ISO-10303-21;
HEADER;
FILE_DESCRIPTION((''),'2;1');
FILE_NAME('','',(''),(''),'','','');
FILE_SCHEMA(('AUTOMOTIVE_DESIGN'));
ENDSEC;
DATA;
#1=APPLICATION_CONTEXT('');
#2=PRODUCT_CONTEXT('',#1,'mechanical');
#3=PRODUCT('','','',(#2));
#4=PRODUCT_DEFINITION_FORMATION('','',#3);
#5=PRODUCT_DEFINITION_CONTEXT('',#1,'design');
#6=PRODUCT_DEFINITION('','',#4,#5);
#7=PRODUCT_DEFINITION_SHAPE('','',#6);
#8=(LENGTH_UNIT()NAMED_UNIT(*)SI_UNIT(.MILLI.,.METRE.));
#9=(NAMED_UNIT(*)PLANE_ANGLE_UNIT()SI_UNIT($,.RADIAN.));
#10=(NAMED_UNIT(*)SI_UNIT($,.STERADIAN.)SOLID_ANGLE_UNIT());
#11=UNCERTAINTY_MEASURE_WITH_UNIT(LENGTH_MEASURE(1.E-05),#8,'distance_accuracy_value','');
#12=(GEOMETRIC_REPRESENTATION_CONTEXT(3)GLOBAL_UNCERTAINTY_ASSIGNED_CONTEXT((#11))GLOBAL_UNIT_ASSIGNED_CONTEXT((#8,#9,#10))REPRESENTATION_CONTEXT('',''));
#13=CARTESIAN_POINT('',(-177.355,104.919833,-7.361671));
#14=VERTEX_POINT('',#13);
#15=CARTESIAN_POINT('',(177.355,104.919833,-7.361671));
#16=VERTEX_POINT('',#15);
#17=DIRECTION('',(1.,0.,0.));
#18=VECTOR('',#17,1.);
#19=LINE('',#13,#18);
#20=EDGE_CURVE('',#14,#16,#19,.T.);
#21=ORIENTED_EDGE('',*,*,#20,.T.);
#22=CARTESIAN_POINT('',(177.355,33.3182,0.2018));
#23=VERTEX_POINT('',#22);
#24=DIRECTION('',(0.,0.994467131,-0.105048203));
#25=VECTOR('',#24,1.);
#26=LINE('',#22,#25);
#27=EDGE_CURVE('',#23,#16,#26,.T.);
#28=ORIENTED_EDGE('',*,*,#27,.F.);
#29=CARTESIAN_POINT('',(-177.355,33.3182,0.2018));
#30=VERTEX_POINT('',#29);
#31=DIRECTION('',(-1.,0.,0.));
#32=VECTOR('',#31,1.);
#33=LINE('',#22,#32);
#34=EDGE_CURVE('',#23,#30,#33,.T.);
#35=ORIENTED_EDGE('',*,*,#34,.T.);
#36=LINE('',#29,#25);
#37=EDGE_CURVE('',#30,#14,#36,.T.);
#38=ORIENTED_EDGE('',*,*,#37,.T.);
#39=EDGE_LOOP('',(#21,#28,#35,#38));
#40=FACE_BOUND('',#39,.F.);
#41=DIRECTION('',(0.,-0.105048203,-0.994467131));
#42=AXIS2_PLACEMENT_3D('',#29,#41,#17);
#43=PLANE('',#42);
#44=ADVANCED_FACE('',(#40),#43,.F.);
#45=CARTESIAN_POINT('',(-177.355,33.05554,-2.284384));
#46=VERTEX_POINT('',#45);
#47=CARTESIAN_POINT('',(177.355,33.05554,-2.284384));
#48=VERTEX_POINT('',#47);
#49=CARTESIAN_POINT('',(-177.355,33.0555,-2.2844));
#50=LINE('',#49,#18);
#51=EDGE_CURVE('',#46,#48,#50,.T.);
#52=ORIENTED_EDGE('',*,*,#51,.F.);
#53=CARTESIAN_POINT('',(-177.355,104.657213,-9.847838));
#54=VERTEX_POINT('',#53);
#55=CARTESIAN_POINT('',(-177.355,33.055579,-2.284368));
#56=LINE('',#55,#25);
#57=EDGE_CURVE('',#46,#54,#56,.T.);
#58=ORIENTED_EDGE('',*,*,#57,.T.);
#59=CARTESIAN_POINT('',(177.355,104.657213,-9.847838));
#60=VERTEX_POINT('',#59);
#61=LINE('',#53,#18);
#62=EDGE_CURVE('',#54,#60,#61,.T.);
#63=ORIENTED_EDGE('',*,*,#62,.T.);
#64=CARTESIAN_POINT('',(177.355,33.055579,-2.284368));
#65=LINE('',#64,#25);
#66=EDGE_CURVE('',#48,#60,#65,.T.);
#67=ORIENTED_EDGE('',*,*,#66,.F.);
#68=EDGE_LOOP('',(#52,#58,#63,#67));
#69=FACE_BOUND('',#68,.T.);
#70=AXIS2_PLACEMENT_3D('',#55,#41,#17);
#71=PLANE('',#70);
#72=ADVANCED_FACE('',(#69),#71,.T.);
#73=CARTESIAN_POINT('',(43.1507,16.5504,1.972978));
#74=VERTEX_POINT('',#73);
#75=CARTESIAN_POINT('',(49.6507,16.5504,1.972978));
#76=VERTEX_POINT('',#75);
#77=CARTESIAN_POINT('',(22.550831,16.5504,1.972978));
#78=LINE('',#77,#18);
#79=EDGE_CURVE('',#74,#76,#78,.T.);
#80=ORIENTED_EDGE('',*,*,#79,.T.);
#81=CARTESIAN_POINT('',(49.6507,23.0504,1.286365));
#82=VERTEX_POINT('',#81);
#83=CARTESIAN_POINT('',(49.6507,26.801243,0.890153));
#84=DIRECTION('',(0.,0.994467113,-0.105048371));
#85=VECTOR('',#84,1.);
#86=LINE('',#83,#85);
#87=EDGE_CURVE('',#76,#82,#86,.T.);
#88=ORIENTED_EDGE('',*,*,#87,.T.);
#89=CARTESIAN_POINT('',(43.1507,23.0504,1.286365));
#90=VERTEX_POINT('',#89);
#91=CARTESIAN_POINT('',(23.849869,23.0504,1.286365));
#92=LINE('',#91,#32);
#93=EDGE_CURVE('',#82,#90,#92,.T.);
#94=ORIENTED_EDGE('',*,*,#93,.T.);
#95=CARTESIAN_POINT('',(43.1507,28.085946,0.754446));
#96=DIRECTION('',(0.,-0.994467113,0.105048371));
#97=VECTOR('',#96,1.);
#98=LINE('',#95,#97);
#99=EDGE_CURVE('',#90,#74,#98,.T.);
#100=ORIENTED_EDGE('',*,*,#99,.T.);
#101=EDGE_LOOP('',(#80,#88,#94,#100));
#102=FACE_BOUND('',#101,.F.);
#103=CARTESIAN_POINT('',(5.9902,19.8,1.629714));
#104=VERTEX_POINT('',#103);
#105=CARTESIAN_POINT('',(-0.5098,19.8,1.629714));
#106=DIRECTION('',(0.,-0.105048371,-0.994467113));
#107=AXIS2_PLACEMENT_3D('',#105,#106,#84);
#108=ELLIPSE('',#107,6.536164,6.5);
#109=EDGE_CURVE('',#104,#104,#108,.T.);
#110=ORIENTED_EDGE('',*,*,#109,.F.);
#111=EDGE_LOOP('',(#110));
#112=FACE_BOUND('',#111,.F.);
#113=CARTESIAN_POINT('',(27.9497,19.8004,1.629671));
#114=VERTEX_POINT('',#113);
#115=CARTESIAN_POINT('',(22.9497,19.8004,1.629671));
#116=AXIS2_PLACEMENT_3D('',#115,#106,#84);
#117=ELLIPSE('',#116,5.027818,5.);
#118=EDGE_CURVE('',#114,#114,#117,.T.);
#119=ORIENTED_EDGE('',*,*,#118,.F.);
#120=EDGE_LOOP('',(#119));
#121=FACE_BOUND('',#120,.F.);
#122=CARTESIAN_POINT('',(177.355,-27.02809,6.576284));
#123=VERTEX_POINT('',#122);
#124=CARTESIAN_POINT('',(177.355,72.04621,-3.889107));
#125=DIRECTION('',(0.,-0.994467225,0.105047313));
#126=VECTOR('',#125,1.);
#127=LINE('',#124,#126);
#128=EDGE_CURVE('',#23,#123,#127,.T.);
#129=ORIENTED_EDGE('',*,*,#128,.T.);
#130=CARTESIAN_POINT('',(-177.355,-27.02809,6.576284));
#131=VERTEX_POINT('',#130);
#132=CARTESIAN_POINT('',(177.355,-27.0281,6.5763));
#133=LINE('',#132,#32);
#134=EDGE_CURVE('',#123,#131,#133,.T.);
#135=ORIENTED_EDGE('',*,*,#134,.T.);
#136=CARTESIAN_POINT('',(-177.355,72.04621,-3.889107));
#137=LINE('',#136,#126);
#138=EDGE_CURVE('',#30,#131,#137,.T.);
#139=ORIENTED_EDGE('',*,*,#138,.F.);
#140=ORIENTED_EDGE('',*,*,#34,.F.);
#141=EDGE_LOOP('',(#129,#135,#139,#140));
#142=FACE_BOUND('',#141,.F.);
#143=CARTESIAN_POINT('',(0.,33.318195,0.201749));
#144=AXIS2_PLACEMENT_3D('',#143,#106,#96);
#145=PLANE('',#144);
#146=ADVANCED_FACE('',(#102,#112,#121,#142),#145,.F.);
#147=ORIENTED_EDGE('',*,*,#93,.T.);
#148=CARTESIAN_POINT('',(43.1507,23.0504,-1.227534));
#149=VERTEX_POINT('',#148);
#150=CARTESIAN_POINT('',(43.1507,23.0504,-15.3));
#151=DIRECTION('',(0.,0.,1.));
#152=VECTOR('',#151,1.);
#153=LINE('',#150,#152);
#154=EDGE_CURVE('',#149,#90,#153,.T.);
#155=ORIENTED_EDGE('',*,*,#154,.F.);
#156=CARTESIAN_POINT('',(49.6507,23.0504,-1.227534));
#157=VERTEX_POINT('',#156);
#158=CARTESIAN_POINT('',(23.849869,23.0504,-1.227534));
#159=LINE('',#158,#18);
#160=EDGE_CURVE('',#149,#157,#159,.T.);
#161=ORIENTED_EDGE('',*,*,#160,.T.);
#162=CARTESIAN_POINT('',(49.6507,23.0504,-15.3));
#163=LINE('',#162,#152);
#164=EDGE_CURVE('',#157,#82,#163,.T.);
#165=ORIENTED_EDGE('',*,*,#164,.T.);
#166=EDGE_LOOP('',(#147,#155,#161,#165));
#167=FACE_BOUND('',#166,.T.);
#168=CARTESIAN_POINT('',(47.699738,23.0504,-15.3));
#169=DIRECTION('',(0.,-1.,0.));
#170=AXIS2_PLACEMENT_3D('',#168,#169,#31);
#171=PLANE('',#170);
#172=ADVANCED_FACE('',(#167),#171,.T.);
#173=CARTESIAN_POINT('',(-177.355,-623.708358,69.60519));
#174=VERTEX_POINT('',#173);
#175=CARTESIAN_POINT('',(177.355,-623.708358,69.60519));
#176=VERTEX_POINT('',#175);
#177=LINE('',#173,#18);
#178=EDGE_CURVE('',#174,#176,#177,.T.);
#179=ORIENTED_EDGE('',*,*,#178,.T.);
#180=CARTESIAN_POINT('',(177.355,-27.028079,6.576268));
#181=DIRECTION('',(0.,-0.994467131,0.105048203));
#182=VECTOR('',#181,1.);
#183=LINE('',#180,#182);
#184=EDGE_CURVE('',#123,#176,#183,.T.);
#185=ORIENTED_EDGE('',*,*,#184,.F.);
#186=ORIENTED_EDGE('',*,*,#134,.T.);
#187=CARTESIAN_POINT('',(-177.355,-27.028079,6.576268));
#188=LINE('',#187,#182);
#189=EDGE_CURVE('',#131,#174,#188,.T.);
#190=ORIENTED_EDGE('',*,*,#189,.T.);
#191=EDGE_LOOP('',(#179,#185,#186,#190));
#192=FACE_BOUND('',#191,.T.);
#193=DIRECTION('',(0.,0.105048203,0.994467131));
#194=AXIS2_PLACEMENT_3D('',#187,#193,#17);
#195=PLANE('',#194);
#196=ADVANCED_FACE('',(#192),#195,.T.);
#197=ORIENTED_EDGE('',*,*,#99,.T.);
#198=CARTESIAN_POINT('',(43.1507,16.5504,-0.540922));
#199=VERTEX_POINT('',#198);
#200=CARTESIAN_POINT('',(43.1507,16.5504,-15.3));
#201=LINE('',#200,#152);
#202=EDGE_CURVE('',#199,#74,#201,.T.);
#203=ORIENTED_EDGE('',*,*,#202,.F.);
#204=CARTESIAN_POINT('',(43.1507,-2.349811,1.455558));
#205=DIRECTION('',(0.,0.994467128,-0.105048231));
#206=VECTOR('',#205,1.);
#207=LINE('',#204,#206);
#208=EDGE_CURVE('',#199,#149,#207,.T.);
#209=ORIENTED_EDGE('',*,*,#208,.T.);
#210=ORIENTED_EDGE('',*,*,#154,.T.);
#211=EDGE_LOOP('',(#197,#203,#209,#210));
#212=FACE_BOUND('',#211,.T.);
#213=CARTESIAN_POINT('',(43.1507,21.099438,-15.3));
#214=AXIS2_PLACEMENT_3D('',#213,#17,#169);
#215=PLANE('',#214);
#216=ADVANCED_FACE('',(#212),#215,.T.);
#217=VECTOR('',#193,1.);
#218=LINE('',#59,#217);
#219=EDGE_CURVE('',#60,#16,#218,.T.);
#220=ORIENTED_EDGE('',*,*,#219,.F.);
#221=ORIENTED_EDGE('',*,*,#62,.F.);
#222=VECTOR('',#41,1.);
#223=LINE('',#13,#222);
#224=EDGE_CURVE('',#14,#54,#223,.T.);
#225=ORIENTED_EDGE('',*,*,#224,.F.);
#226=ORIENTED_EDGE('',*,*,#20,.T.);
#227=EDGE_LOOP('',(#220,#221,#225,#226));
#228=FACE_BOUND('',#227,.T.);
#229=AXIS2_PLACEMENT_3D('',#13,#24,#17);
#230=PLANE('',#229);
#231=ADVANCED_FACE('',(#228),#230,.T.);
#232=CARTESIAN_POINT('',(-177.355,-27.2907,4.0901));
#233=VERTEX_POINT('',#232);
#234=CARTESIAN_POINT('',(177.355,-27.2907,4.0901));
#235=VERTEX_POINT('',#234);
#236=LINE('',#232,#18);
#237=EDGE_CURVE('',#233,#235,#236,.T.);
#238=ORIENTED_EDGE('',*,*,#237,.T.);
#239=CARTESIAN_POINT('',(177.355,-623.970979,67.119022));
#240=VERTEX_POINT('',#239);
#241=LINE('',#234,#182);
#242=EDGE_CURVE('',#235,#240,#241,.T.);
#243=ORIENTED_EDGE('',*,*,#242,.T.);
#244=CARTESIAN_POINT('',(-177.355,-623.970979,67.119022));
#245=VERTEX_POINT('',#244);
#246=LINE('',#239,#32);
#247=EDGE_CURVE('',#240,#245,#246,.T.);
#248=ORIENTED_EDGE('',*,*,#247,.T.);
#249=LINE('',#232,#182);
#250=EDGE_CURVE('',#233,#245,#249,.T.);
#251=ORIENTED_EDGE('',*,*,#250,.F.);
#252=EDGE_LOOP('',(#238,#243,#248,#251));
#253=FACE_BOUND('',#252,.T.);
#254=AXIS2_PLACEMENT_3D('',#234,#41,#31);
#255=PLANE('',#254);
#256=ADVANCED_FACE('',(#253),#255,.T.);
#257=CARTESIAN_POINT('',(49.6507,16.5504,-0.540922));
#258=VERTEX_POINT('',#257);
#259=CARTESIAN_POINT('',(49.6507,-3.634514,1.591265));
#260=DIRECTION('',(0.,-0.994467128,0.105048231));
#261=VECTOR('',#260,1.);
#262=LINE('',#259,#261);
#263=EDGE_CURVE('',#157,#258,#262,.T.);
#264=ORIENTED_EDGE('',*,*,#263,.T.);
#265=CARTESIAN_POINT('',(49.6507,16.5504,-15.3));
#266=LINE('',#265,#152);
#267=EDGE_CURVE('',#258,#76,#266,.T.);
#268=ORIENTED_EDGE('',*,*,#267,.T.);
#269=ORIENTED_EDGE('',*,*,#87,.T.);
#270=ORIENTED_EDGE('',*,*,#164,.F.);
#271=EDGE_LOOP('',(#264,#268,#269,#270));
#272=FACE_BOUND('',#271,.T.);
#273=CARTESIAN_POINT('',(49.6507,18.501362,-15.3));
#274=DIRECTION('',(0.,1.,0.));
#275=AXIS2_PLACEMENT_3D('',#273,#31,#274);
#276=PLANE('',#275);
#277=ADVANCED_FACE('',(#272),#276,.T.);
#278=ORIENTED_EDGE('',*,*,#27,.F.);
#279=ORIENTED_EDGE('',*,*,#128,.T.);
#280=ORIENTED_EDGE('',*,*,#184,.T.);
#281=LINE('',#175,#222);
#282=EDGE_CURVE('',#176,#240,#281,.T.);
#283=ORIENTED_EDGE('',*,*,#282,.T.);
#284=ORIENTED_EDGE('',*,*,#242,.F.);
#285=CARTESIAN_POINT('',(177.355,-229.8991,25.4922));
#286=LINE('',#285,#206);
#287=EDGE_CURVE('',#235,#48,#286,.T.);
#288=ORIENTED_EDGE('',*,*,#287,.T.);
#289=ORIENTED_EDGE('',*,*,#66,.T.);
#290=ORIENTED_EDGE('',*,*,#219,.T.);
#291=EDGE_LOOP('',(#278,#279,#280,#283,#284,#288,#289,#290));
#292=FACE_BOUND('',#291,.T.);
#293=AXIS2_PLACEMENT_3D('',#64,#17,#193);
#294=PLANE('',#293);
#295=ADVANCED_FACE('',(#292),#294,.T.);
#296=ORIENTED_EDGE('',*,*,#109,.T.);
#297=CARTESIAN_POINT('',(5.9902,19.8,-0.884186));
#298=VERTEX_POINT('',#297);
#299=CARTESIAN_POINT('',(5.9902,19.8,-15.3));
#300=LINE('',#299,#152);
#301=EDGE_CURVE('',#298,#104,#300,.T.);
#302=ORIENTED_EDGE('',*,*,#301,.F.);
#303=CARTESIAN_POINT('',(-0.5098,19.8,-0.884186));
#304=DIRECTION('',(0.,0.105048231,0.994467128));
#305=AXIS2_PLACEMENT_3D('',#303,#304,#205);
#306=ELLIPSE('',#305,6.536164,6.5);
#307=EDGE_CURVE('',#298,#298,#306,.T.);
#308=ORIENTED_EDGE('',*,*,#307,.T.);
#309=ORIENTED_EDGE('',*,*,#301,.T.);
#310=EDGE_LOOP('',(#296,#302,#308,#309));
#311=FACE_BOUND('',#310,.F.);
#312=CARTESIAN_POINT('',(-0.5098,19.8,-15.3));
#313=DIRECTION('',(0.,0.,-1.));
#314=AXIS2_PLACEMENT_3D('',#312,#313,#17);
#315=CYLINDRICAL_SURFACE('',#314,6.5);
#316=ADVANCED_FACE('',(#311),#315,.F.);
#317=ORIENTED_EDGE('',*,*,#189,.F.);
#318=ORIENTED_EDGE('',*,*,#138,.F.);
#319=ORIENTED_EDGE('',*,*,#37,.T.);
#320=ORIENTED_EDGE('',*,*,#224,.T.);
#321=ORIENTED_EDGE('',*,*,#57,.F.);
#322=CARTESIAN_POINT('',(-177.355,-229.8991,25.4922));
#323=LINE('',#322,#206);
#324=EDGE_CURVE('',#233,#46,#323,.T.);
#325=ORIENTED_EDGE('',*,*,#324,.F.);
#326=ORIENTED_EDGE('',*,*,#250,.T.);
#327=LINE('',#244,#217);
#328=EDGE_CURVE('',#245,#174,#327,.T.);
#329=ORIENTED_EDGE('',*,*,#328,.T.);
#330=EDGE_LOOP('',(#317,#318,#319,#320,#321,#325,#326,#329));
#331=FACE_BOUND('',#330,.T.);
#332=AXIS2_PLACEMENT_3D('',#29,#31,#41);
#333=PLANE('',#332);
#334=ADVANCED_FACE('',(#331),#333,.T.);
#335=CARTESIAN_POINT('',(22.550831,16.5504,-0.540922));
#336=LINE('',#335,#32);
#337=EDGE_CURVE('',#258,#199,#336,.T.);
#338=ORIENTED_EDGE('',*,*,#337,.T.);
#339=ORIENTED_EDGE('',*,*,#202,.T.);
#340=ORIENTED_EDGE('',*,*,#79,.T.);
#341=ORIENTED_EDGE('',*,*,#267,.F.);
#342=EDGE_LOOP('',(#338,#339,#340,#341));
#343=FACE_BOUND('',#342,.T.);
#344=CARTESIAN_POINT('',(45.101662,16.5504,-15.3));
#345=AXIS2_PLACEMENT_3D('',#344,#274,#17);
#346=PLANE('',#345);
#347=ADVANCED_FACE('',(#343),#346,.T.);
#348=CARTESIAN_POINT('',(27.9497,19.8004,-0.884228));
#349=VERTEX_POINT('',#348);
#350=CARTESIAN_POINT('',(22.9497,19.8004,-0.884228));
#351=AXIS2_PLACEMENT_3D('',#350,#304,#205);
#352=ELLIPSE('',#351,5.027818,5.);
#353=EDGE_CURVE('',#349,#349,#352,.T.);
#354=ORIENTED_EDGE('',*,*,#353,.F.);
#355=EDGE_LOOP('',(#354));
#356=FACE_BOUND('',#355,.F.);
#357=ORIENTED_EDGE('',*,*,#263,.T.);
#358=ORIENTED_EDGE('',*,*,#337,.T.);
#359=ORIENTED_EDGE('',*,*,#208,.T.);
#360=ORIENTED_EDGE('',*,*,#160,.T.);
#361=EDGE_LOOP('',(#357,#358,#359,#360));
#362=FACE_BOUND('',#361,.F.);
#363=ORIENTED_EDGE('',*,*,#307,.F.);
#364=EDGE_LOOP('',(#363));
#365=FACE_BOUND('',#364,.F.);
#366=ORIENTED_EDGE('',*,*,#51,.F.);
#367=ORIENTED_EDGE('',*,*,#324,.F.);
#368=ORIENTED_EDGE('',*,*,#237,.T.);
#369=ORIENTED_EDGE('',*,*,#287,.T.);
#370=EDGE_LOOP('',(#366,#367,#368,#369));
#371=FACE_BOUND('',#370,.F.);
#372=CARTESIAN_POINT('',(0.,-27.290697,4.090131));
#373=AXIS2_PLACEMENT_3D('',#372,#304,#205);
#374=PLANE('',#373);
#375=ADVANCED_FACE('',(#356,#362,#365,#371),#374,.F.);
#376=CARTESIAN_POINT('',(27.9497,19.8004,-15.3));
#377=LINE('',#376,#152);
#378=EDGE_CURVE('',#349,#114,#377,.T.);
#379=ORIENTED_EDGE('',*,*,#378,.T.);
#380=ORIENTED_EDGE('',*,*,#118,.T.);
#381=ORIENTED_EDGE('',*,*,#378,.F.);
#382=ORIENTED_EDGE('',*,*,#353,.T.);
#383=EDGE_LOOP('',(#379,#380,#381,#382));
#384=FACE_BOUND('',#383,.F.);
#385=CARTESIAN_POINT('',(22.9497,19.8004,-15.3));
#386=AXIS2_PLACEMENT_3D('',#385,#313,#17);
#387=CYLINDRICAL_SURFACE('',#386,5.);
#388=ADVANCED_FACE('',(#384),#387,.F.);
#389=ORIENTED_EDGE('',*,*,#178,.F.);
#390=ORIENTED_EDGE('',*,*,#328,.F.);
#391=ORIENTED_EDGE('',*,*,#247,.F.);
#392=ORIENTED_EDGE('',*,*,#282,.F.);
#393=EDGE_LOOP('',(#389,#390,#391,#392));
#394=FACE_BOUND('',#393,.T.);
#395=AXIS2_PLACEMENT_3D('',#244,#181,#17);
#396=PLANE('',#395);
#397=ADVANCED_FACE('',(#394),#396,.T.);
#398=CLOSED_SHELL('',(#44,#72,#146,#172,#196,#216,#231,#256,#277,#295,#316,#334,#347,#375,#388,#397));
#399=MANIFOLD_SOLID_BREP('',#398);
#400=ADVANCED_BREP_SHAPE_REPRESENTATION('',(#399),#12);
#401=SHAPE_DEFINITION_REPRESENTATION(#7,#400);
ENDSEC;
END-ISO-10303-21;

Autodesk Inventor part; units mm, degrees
ref_plane "YZ Plane" through (0, 0, 0) normal (1, 0, 0) x (0, 1, 0)
ref_plane "XZ Plane" through (0, 0, 0) normal (0, 1, 0) x (-1, 0, 0)
ref_plane "XY Plane" through (0, 0, 0) normal (0, 0, 1) x (1, 0, 0)
sketch "Sketch2" plane through (0, 0, 0) normal (1, 0, 0) x (0, 1, 0)
  line L0 (9.7757, 0) -> (-10.7, 0) projected
  line L1 (27.1787, -1.709) -> (12.4213, -1.709) projected
  line L2 (10.7, 0) -> (9.7757, 0) projected
  arc A0 (11, -0.3) -> (10.7, 0) centre (10.7, -0.3) ccw projected
  line L3 (11, -15) -> (11, -0.3) projected
  line L4 (-229.8991, 25.4922) -> (33.0555, -2.2844)
  line L5 (72.0462, -3.8892) -> (-254.3637, 30.5904)
  line L6 (33.0555, -2.2844) -> (33.3182, 0.2018)
  line L7 (-27.0281, 6.5763) -> (-27.2907, 4.0901)
  point P0 (0, 0)
  point P1 (33.3182, 0.2018)
  dimension "d5" = 2.5
extrude "Extrusion2" add sketch "Sketch2" along normal mid plane 354.71
ref_plane "Work Plane1" through (-31.6, 28.9, -15.3) normal (0, 0, 1) x (-0.0000001, -1, 0)
sketch "Sketch3" plane through (-100, -27.0281, -15.3) normal (0, 0, 1) x (1, 0, 0)
  circle A0 centre (99.4902, 46.8281) radius 4.4577 projected
  circle A1 centre (122.9497, 46.8285) radius 3.99 projected
  line L0 (144.7507, 45.1805) -> (148.0507, 45.1805) projected
  circle A2 centre (99.4902, 46.8281) radius 6.5
  circle A3 centre (122.9497, 46.8285) radius 5
  circle A4 centre (146.4007, 46.8285) radius 3.5
  line L1 (148.0507, 48.4805) -> (144.7507, 48.4805) projected
  line L2 (144.4007, 48.8305) -> (144.4007, 44.8305) projected
  line L3 (148.0507, 45.1805) -> (148.0507, 48.4805) projected
  line L4 (144.7507, 45.1805) -> (148.0507, 45.1805) projected
  line L5 (148.0507, 48.4805) -> (144.7507, 48.4805) projected
  line L6 (144.7507, 48.4805) -> (144.7507, 45.1805) projected
  line L7 (149.6507, 50.0785) -> (143.1507, 50.0785)
  line L8 (143.1507, 50.0785) -> (143.1507, 43.5785)
  line L9 (143.1507, 43.5785) -> (149.6507, 43.5785)
  line L10 (149.6507, 43.5785) -> (149.6507, 50.0785)
  line L11 (149.6507, 50.0785) -> (143.1507, 43.5785) construction
  line L12 (143.1507, 50.0785) -> (149.6507, 43.5785) construction
  point P0 (146.4007, 45.1805)
  dimension "d13" = 13
  dimension "d14" = 10
  dimension "d15" = 7
  dimension "d20" = 6.5
  dimension "d21" = 6.5
extrude "Extrusion3" cut sketch "Sketch3" along normal through all contours A0 | A1 | L6 L1 L3 L0 | A2 | A3 | L10 A4 L9 L8 L7 | A4 L7 L10 | L10 L9 A4 | A4 L8 L7 | L9 L8 A4
sketch "Sketch4" plane through (-177.355, -27.2907, 4.0901) normal (0, -0.9944671, 0.1050482) x (1, 0, 0)
  line L0 (354.71, 0) -> (0, 0) projected
  line L1 (354.71, 2.5) -> (354.71, 0) projected
  line L2 (0, 2.5) -> (354.71, 2.5) projected
  line L3 (0, 0) -> (0, 2.5) projected
  point P0 (177.355, -1.2007)
extrude "Extrusion4" add sketch "Sketch4" along normal blind 600
sketch "Sketch5" plane through (-177.355, 33.3182, 0.2018) normal (0, 0.9944671, -0.1050482) x (1, 0, 0)
  line L0 (0, 0) -> (354.71, 0) projected
  line L1 (354.71, 2.5) -> (354.71, 0) projected
  line L2 (0, 2.5) -> (354.71, 2.5) projected
  line L3 (0, 0) -> (0, 2.5) projected
  point P0 (177.355, 3.7007)
extrude "Extrusion5" add sketch "Sketch5" along normal blind 72
sketch "Sketch6" plane through (-177.355, -623.7084, 69.6052) normal (0, 0.1050482, 0.9944671) x (1, 0, 0)
  point P0 (177.355, 627.5694)
properties part number "panel"
